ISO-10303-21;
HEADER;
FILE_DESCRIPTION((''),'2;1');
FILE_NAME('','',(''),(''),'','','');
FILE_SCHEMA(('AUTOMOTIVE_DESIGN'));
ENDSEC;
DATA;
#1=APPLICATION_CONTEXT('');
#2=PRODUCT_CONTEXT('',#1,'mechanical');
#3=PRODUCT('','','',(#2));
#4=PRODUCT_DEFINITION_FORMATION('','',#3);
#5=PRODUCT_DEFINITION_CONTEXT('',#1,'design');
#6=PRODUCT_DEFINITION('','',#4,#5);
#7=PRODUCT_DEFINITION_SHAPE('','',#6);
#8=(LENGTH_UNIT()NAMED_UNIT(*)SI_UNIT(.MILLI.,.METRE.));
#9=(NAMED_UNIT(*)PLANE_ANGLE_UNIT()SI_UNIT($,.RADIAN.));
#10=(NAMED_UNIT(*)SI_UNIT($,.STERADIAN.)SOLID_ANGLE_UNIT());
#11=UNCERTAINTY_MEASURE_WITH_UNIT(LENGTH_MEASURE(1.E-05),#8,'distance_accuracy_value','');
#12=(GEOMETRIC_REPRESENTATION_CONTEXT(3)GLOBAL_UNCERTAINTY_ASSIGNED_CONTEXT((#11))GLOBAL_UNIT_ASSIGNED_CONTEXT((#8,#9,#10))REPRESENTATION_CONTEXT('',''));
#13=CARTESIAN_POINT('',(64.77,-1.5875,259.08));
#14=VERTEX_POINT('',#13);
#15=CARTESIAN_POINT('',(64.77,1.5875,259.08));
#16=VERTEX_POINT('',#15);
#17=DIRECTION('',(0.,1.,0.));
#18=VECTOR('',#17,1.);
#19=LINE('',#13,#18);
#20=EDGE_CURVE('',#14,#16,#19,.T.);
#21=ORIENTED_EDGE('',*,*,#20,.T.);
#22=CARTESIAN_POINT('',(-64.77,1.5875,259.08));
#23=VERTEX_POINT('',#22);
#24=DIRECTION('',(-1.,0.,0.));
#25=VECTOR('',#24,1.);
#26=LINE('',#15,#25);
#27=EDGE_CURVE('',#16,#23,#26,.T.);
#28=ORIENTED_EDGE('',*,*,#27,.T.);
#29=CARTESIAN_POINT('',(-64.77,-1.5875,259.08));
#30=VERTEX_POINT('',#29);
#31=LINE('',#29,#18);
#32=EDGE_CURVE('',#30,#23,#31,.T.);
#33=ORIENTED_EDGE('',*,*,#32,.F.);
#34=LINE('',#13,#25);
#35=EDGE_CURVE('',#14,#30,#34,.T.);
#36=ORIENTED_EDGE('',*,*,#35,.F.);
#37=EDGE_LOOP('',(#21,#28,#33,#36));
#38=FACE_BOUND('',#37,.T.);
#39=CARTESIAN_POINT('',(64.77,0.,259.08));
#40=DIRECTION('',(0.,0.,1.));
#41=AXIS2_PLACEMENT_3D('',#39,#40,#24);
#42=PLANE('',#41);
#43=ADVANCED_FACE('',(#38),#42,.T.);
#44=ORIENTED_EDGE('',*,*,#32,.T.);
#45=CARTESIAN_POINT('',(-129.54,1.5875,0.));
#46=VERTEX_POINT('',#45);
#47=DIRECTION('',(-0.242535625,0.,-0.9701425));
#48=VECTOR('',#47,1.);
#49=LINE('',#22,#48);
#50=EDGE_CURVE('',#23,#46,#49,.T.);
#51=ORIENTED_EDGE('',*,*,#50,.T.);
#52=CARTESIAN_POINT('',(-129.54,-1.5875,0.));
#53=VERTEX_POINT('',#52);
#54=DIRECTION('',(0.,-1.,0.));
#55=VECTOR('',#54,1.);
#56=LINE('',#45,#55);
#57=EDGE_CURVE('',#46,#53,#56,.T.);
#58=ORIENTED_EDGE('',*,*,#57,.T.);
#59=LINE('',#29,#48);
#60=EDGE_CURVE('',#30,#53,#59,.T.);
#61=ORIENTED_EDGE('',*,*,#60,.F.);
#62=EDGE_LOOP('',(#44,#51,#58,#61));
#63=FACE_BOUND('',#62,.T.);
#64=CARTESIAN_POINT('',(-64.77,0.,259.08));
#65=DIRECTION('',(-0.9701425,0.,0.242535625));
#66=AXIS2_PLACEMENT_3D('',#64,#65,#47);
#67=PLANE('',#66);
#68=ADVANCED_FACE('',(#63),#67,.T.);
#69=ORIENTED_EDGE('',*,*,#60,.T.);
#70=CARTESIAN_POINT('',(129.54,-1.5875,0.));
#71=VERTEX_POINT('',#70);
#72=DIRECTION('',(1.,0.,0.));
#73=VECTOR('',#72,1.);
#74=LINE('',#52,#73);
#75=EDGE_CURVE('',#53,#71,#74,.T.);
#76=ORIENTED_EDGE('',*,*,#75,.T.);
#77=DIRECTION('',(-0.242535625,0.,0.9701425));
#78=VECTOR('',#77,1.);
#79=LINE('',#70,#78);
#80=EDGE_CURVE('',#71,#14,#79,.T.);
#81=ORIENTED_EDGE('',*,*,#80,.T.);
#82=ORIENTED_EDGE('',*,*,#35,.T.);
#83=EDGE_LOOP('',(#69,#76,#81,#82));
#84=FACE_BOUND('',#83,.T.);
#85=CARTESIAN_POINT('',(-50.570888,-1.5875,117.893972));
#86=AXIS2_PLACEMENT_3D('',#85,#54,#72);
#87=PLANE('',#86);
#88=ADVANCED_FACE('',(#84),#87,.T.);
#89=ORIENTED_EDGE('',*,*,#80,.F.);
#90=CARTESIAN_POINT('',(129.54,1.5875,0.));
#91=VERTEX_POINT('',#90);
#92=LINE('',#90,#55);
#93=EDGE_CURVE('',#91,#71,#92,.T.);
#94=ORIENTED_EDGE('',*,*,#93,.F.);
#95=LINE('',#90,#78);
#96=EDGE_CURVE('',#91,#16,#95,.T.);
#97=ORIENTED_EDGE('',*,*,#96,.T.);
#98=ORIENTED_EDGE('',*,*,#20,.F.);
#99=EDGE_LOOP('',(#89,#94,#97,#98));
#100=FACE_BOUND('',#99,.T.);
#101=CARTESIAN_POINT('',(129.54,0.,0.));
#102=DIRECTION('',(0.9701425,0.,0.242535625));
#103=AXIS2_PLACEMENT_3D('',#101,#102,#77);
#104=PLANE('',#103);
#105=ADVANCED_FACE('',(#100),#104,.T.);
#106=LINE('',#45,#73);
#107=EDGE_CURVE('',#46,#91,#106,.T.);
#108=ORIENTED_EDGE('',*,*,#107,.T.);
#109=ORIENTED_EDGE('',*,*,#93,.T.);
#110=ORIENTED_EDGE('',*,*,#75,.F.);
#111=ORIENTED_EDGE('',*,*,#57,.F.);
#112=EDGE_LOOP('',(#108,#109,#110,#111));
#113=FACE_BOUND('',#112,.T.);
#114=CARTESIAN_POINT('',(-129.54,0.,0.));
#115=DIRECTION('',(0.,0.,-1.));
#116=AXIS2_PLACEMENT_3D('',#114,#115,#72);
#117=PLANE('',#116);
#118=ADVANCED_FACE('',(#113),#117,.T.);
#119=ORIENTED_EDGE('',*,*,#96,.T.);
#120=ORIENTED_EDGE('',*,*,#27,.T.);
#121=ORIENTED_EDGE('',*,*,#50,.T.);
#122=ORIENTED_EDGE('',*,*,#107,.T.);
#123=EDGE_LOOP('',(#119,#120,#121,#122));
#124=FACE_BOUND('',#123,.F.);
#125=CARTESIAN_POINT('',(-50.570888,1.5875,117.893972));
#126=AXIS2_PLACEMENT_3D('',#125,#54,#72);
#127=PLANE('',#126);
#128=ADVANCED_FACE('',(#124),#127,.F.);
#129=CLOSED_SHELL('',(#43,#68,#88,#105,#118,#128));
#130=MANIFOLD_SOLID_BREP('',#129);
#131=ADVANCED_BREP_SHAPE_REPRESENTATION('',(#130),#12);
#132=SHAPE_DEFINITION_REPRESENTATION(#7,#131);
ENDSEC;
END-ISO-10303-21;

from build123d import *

# Parameters (mm, degrees)
F1_DEPTH = 1.5875


# Not quite as in the source:
# - a length typed as a fraction of an inch, garbled in the dataset ("3 / 203.2 mm" for 3/8 in), is restored


with BuildPart() as f1:
    # F0 (on Front) → F1 (new body, symmetric)
    with BuildSketch(Plane.XZ):
        Polygon((-64.77, 259.08), (-129.54, 0), (0, 0), (0, 259.08), align=None)
        Polygon((0, 259.08), (0, 0), (129.54, 0), (64.77, 259.08), align=None)
    extrude(amount=F1_DEPTH, both=True)


solid = f1.part
